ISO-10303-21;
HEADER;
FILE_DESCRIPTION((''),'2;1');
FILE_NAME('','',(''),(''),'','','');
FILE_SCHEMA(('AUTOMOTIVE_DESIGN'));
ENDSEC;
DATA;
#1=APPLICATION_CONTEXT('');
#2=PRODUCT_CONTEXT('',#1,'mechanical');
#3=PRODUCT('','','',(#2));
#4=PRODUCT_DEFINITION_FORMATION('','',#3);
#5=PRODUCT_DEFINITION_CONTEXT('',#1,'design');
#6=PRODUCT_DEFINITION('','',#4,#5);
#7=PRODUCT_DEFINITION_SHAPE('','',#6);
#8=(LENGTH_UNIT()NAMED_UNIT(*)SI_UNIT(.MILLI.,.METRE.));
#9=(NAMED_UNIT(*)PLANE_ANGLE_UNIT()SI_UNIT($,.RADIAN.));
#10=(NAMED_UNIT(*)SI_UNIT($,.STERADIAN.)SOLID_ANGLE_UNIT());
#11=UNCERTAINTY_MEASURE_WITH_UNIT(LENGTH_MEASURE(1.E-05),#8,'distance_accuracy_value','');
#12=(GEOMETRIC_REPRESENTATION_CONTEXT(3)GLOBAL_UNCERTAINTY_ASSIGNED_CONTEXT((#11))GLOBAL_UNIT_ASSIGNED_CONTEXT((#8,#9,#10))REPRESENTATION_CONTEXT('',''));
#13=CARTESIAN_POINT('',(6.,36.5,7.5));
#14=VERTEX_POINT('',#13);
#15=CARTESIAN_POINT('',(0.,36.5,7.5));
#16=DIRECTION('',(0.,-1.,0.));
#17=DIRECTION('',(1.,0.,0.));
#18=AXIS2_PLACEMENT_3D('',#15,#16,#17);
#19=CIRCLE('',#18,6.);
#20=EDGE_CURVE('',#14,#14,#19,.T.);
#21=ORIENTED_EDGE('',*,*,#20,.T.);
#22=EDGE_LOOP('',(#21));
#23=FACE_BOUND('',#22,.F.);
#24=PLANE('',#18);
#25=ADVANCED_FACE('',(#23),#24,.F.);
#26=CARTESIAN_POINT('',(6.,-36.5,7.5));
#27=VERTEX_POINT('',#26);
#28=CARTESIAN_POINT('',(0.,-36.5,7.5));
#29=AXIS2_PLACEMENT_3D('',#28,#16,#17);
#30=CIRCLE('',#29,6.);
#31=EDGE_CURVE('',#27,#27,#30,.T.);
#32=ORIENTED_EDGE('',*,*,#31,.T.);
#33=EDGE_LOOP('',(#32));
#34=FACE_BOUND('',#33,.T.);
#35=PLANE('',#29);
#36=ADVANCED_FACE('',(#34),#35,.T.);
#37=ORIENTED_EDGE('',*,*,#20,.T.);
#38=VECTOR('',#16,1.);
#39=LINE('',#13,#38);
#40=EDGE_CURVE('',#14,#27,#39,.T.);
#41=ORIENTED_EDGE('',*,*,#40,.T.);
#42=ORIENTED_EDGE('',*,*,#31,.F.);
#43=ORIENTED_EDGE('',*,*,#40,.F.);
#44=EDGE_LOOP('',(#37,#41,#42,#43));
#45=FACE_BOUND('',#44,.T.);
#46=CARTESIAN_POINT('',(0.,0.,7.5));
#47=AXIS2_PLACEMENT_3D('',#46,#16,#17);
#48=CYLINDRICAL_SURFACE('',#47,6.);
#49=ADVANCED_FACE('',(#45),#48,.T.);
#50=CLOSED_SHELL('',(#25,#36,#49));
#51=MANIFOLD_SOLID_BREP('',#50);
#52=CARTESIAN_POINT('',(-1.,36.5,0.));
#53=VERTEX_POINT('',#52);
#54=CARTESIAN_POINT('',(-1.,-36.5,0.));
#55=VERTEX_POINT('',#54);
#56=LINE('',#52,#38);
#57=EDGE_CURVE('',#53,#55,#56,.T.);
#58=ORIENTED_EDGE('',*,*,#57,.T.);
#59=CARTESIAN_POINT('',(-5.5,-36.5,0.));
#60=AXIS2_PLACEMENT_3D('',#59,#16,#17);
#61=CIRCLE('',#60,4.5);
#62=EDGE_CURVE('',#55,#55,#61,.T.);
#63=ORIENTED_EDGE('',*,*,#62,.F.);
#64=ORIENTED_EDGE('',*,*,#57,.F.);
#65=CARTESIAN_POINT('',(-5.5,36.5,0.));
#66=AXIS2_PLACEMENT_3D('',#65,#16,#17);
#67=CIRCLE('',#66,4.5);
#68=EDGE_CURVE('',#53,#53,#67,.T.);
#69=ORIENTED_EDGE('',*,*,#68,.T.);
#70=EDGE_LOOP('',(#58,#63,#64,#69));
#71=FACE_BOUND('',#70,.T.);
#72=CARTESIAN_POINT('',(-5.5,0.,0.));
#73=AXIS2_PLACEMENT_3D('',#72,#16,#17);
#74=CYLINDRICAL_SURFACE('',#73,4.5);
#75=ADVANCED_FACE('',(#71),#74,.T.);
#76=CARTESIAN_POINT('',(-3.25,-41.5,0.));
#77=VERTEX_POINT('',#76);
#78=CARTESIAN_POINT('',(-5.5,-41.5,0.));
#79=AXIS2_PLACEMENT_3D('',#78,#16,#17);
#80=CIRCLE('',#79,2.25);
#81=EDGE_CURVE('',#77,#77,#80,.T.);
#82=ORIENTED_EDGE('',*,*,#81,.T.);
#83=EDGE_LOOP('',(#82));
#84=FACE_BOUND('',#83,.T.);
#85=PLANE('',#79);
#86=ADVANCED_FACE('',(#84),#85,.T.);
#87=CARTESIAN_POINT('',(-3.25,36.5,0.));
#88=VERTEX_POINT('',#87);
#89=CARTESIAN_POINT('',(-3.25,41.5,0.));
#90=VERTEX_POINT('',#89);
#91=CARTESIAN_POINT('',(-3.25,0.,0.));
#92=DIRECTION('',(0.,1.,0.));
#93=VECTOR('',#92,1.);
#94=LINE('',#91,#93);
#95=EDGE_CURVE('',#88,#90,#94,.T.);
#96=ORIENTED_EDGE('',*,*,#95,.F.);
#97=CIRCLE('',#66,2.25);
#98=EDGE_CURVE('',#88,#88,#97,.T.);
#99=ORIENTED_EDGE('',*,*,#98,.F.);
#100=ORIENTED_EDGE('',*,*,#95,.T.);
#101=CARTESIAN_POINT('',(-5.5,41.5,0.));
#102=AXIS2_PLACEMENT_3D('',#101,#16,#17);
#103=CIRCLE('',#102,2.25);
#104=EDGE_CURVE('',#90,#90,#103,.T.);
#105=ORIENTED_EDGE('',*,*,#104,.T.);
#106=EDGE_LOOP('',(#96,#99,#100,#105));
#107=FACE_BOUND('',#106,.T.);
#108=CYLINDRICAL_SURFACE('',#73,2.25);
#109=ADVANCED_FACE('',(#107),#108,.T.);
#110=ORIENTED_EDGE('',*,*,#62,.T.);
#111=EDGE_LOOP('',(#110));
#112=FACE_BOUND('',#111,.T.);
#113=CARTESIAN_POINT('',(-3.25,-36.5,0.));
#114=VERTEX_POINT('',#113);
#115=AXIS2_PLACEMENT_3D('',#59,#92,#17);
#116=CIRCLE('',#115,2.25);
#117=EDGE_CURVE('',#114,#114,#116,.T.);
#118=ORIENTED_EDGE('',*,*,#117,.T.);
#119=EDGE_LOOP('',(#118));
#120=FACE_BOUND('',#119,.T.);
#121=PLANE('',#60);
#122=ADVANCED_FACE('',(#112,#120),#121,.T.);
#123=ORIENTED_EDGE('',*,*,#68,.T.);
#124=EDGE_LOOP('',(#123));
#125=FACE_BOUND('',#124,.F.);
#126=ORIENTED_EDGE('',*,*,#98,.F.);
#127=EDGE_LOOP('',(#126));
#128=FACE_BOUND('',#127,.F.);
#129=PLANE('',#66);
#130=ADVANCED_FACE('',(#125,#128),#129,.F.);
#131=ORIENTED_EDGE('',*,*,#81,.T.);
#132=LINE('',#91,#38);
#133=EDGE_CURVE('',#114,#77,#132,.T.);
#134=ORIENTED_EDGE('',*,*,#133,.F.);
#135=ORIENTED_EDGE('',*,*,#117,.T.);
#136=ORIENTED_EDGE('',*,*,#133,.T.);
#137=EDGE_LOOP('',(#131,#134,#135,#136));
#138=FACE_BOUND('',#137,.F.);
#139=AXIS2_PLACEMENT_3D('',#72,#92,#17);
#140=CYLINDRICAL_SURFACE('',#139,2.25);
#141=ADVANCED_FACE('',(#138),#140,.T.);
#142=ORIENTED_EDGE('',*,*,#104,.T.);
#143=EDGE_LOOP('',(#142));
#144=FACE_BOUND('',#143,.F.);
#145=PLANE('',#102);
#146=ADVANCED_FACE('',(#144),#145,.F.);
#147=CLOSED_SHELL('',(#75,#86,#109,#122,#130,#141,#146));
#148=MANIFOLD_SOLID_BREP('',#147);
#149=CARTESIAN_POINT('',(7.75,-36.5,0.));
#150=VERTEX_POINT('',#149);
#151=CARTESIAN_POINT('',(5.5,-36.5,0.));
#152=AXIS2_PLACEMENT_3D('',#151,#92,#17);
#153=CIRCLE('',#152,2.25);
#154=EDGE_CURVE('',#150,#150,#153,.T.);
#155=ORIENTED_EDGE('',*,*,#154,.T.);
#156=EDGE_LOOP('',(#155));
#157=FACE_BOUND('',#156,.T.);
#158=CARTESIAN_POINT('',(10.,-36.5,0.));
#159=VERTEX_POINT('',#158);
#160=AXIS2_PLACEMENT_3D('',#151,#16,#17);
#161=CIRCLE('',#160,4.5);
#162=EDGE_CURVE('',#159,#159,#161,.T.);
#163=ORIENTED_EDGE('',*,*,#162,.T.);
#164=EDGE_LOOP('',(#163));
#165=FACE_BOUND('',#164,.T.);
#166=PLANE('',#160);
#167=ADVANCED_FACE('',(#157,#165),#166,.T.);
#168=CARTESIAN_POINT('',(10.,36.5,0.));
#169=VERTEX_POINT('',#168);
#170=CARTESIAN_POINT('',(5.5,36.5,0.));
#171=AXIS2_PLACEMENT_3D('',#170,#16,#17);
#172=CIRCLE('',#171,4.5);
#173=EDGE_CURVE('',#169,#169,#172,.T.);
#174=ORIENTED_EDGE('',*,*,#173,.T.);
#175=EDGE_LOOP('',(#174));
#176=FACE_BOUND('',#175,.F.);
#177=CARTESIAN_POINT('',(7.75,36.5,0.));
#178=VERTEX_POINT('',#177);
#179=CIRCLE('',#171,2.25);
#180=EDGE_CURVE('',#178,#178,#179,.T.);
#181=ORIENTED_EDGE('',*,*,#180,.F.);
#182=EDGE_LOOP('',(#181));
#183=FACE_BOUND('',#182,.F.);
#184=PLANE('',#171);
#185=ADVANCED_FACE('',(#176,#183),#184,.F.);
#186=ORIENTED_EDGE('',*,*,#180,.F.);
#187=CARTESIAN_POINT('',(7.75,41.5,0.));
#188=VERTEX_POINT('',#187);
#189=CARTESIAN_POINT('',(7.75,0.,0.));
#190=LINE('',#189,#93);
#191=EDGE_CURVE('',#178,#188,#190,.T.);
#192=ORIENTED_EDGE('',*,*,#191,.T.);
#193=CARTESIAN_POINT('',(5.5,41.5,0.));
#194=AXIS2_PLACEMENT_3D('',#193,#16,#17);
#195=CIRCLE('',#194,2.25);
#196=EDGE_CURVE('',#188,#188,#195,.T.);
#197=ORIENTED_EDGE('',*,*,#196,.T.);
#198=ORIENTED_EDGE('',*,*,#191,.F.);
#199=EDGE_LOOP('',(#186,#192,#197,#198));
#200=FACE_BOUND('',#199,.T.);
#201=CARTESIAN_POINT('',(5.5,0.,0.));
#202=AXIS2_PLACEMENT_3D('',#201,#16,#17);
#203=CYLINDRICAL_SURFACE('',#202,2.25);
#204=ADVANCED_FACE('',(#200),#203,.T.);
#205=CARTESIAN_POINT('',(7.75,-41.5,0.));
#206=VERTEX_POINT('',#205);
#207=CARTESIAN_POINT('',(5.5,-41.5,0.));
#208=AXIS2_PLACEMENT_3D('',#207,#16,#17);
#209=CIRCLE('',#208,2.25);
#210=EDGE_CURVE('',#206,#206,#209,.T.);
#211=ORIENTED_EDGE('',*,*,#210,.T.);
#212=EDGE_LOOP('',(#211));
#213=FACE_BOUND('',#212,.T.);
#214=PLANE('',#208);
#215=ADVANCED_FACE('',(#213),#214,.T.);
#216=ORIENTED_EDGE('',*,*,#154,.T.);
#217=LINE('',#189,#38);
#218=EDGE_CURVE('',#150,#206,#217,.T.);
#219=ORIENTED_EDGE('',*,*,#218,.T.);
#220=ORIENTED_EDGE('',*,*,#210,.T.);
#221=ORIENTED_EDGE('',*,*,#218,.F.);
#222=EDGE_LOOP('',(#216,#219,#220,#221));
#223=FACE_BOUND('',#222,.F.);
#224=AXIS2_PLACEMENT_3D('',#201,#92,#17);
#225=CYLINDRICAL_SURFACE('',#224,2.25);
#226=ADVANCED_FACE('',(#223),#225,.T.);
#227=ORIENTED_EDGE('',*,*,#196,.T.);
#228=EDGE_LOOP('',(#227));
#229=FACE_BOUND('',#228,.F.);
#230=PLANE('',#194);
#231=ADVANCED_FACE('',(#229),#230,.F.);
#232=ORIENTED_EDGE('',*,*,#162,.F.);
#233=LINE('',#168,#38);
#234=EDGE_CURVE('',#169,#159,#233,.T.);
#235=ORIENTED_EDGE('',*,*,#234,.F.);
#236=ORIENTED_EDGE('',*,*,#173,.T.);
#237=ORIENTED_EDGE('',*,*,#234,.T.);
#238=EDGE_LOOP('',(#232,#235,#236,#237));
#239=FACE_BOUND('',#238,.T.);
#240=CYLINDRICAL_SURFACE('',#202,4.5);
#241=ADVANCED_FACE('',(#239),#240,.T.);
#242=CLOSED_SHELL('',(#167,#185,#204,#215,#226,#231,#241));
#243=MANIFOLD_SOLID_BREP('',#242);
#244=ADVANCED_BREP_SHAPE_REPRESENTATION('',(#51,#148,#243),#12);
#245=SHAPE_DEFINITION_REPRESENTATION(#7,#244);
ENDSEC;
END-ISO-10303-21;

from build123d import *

# Parameters (mm, degrees)
F0_R          = 4.5
F1_DEPTH      = 36.5
F1_DEPTH_BACK = 36.5
F2_R          = 2.25
F3_DEPTH      = 41.5
F3_DEPTH_BACK = 41.5
F4_R          = 6
F5_DEPTH      = 36.5
F5_DEPTH_BACK = 36.5


with BuildPart() as f1:
    # F0 (on Front) → F1 (new body, two sides)
    with BuildSketch(Plane.XZ) as f1_sk:
        with Locations((-5.5, 0)):
            Circle(F0_R)
    extrude(amount=F1_DEPTH)
    extrude(f1_sk.sketch, amount=-F1_DEPTH_BACK)

    # F2 (on Front) → F3, piece 2 (join, two sides)
    with BuildSketch(Plane.XZ) as f3_2_sk:
        with Locations((-5.5, 0)):
            Circle(F2_R)
    extrude(amount=F3_DEPTH)
    extrude(f3_2_sk.sketch, amount=-F3_DEPTH_BACK)


with BuildPart() as f1b:
    # F0 (on Front) → F1, piece 2 (new body, two sides)
    with BuildSketch(Plane.XZ) as f1_2_sk:
        with Locations((5.5, 0)):
            Circle(F0_R)
    extrude(amount=F1_DEPTH)
    extrude(f1_2_sk.sketch, amount=-F1_DEPTH_BACK)

    # F2 (on Front) → F3 (join, two sides)
    with BuildSketch(Plane.XZ) as f3_sk:
        with Locations((5.5, 0)):
            Circle(F2_R)
    extrude(amount=F3_DEPTH)
    extrude(f3_sk.sketch, amount=-F3_DEPTH_BACK)


with BuildPart() as f5:
    # F4 (on Front) → F5 (new body, two sides)
    with BuildSketch(Plane.XZ) as f5_sk:
        with Locations((0, 7.5)):
            Circle(F4_R)
    extrude(amount=F5_DEPTH)
    extrude(f5_sk.sketch, amount=-F5_DEPTH_BACK)


solid = Compound([f1.part, f1b.part, f5.part])
